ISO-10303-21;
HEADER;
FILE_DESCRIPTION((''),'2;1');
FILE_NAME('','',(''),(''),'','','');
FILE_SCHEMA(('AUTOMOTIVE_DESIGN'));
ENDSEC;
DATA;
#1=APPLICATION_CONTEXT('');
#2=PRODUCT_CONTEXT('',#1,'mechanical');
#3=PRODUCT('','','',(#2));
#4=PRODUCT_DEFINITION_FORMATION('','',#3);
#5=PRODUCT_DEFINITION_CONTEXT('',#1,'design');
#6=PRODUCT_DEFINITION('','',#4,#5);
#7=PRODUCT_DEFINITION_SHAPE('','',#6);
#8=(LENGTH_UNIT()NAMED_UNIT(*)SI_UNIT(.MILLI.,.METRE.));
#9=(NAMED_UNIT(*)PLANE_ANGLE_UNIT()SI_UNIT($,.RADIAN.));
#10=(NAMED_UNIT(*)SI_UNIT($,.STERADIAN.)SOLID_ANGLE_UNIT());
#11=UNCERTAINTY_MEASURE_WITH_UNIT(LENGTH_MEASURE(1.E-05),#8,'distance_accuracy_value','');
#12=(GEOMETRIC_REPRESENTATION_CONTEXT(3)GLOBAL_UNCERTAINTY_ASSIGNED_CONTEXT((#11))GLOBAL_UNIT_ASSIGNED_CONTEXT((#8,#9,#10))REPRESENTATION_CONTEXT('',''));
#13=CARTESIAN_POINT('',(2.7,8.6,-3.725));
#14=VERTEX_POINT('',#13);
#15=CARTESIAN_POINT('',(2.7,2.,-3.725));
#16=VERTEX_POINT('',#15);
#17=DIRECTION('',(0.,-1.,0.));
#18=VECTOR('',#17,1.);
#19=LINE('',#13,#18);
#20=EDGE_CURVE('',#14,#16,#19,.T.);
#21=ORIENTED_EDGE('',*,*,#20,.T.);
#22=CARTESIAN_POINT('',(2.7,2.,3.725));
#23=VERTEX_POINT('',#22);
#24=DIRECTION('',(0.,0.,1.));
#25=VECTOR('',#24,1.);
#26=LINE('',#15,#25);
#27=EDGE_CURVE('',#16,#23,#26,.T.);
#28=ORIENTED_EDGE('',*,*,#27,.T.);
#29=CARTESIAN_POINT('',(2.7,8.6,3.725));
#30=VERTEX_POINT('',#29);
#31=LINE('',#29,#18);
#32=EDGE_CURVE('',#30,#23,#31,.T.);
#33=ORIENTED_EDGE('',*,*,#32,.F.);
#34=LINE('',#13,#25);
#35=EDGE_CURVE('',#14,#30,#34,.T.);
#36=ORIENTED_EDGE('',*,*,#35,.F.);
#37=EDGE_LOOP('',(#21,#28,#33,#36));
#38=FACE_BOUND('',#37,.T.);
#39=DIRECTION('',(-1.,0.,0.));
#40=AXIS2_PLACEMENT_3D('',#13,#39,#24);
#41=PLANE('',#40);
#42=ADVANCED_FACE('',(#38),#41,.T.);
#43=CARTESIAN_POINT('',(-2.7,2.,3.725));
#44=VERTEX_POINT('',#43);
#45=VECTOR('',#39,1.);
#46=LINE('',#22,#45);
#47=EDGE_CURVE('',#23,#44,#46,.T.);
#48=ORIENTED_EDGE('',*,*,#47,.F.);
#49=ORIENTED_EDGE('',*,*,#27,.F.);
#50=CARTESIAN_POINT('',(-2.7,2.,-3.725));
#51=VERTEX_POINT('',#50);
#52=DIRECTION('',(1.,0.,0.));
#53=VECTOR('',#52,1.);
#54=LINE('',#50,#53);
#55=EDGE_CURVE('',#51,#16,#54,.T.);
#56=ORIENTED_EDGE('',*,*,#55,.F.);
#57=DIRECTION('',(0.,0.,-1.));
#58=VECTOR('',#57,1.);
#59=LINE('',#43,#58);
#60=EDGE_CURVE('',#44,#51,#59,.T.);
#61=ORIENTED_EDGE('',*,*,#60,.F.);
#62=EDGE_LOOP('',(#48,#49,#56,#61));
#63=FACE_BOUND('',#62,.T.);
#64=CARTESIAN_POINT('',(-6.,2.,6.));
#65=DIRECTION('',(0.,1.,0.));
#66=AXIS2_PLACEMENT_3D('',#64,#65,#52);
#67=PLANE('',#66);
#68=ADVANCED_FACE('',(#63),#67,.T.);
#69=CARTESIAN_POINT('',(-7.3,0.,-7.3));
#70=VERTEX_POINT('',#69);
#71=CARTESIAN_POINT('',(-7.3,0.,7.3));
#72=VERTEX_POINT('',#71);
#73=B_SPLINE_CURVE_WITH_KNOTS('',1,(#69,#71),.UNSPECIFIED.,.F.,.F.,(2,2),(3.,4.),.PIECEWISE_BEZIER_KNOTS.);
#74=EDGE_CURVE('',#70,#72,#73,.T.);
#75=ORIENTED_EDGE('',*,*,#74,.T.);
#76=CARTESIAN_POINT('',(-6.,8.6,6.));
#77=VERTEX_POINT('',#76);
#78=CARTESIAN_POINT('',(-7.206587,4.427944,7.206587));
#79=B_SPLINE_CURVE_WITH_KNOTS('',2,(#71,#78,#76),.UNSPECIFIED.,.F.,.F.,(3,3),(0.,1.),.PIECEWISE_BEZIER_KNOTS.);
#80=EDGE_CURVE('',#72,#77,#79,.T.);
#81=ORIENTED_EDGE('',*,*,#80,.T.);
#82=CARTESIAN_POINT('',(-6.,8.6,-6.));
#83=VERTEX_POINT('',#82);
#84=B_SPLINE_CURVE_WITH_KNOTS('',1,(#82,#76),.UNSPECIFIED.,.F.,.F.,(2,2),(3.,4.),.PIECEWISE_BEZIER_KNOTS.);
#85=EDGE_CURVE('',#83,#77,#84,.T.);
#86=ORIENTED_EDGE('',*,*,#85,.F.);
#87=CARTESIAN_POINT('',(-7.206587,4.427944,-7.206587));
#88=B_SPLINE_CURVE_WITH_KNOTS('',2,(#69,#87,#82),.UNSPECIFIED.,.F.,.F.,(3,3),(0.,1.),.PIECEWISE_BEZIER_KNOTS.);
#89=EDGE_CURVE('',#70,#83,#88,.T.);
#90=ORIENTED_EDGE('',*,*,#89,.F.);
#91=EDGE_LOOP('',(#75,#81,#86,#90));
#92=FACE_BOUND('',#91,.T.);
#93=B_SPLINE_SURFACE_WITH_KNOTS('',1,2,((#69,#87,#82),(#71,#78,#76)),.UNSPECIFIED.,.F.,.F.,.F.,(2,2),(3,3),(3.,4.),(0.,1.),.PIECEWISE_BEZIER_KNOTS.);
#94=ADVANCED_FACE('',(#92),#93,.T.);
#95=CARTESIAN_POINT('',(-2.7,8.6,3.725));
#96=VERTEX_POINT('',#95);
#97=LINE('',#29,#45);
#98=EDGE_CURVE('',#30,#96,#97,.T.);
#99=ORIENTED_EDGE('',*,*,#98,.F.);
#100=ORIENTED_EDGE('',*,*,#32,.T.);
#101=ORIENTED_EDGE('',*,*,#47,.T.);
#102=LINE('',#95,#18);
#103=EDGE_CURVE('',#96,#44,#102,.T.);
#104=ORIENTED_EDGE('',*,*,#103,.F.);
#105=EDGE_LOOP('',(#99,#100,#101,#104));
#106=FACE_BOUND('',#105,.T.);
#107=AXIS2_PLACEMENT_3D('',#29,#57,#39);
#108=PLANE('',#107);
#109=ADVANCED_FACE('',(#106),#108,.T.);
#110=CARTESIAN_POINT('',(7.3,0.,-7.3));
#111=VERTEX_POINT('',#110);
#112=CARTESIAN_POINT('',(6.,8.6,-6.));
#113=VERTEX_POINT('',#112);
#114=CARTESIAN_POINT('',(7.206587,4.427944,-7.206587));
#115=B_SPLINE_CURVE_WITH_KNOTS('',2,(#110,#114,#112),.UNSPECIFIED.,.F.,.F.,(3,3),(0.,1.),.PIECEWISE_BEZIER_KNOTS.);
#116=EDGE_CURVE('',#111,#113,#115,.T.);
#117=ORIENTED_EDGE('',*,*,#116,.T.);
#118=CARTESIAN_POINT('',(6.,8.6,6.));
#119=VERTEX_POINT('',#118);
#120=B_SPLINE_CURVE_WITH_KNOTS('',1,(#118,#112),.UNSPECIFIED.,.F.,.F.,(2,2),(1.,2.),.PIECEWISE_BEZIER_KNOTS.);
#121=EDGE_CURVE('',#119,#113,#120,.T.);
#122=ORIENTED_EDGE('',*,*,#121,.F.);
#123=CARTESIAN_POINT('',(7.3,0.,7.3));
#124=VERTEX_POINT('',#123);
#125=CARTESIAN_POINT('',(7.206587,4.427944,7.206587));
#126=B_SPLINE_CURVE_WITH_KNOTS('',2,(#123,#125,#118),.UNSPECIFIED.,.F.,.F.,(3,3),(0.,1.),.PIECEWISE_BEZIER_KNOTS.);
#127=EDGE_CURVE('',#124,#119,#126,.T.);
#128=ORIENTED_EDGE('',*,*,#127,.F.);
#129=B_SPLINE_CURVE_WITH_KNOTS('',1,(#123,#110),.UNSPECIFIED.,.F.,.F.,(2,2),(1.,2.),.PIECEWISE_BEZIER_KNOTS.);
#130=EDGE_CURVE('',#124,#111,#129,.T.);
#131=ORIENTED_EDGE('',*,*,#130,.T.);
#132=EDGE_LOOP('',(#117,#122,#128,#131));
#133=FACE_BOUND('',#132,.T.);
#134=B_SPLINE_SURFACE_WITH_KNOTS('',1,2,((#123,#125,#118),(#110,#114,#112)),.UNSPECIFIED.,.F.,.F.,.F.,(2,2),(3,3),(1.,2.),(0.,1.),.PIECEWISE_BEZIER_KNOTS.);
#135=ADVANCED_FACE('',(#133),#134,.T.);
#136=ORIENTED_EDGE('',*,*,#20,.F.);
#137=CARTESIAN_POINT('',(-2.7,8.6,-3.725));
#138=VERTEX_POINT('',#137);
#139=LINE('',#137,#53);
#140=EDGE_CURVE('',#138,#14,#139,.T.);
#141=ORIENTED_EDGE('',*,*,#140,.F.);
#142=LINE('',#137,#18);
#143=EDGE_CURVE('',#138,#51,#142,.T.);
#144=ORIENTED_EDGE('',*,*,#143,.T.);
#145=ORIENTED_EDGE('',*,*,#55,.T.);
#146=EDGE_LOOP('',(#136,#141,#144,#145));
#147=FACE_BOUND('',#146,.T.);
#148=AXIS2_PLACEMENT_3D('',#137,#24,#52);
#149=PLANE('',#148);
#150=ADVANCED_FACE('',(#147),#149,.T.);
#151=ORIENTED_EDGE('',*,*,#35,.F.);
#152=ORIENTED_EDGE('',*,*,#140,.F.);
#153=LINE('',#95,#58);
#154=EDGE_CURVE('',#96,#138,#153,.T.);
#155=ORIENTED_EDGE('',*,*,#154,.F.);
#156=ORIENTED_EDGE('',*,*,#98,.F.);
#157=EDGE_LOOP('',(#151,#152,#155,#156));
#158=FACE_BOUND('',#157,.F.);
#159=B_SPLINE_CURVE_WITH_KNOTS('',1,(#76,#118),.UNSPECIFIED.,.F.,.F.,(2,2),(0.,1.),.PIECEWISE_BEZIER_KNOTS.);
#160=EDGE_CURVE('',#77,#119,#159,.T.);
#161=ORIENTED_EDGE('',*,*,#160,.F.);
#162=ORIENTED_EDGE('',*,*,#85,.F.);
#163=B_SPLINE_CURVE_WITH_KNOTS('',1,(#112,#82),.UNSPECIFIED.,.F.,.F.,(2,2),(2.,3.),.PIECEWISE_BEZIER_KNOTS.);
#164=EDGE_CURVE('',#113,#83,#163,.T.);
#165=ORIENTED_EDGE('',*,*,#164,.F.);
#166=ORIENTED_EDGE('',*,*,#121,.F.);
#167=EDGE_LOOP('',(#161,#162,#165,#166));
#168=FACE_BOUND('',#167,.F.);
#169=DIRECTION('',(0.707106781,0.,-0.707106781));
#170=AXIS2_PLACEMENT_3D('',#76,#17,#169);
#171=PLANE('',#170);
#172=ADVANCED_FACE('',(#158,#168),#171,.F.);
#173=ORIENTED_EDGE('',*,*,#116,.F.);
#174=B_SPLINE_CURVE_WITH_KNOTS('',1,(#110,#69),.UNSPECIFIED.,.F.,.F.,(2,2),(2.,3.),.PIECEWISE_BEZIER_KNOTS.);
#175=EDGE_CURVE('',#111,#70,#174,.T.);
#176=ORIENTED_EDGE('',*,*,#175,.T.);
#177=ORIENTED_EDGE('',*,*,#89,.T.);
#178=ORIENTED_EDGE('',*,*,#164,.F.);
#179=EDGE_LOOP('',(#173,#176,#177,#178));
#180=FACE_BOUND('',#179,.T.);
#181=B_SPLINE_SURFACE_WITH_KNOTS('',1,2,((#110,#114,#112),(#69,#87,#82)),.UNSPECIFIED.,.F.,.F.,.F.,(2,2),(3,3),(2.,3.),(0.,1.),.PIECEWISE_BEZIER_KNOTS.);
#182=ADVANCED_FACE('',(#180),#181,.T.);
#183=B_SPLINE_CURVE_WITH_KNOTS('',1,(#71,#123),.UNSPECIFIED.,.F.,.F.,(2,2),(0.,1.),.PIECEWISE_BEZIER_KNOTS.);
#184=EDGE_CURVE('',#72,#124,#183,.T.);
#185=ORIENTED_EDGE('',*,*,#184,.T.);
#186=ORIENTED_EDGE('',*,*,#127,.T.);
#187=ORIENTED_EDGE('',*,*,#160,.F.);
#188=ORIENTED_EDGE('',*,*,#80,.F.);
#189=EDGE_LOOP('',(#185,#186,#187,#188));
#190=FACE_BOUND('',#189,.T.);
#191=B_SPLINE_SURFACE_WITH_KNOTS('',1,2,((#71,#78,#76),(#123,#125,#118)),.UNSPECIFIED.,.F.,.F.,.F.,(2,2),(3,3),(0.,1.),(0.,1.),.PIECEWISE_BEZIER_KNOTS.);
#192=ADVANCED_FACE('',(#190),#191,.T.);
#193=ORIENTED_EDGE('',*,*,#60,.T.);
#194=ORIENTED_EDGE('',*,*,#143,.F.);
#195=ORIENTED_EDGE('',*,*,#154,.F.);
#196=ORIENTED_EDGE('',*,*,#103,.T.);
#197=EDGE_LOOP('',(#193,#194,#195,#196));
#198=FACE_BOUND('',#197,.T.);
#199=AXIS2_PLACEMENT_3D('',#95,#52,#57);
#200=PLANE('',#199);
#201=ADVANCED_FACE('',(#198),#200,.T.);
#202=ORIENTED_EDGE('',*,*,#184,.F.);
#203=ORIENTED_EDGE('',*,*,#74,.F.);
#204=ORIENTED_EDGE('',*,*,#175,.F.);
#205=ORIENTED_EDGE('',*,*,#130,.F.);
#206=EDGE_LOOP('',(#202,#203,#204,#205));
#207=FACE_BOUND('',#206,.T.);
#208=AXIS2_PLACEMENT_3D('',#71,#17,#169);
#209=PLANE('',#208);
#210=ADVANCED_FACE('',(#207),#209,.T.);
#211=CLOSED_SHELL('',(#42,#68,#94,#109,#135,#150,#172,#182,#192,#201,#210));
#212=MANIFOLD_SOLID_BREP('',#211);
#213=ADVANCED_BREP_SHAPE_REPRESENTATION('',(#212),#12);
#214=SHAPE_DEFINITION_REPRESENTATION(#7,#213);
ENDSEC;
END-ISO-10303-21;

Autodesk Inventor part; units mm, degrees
ref_plane "YZ Plane" through (0, 0, 0) normal (1, 0, 0) x (0, 1, 0)
ref_plane "XZ Plane" through (0, 0, 0) normal (0, 1, 0) x (-1, 0, 0)
sketch "Base Loop" plane through (0, 0, 0) normal (0, 1, 0) x (-1, 0, 0)
  line L0 (-7.3, 7.3) -> (7.3, 7.3)
  line L1 (7.3, 7.3) -> (7.3, -7.3)
  line L2 (7.3, -7.3) -> (-7.3, -7.3)
  line L3 (-7.3, -7.3) -> (-7.3, 7.3)
  line L4 (-7.3, 7.3) -> (7.3, -7.3) construction
  line L5 (7.3, 7.3) -> (-7.3, -7.3) construction
  point P0 (0, 0)
  point P1 (0, 0)
  point P2 (0, 0)
  dimension "d0" = 14.6
  dimension "d1" = 14.6
ref_plane "Mid Plane" through (-7.3, 2, -7.3) normal (0, 1, 0) x (1, 0, 0)
ref_plane "Base Plane" through (-7.3, 0, -7.3) normal (0, 1, 0) x (1, 0, 0)
sketch "Mid Loop" plane through (-7.3, 2, -7.3) normal (0, 1, 0) x (1, 0, 0)
  line L0 (14.5, -14.5) -> (0.1, -14.5)
  line L1 (0.1, -14.5) -> (0.1, -0.1)
  line L2 (0.1, -0.1) -> (14.5, -0.1)
  line L3 (14.5, -0.1) -> (14.5, -14.5)
  line L4 (14.5, -14.5) -> (0.1, -0.1) construction
  line L5 (0.1, -14.5) -> (14.5, -0.1) construction
  point P0 (7.3, -7.3)
  dimension "d3" = 14.4
  dimension "d4" = 14.4
ref_plane "Top Plane" through (-7.3, 8.6, -7.3) normal (0, 1, 0) x (1, 0, 0)
sketch "Top Loop" plane through (-7.3, 8.6, -7.3) normal (0, 1, 0) x (1, 0, 0)
  line L0 (13.3, -13.3) -> (1.3, -13.3)
  line L1 (1.3, -13.3) -> (1.3, -1.3)
  line L2 (1.3, -1.3) -> (13.3, -1.3)
  line L3 (13.3, -1.3) -> (13.3, -13.3)
  line L4 (13.3, -13.3) -> (1.3, -1.3) construction
  line L5 (1.3, -13.3) -> (13.3, -1.3) construction
  point P0 (7.3, -7.3)
  dimension "d6" = 12
  dimension "d7" = 12
loft "Keyswitch Body" add profiles "Base Loop", "Mid Loop", "Top Loop"
sketch "Cut in profile" plane through (-6, 8.6, 6) normal (0, 1, 0) x (1, 0, 0)
  line L0 (8.7, 2.275) -> (3.3, 2.275)
  line L1 (3.3, 2.275) -> (3.3, 9.725)
  line L2 (3.3, 9.725) -> (8.7, 9.725)
  line L3 (8.7, 9.725) -> (8.7, 2.275)
  line L4 (8.7, 2.275) -> (3.3, 9.725) construction
  line L5 (3.3, 2.275) -> (8.7, 9.725) construction
  point P0 (6, 6)
  dimension "d17" = 7.45
  dimension "d18" = 5.4
extrude "Pole Cut in" cut sketch "Cut in profile" against normal blind 6.6
equation "\"d1\" = d0"
equation "\"d3\" = s_bwidth"
equation "\"d4\" = d3"
equation "\"d17\" = s_polebl"
equation "\"d18\" = s_polebw"
equation "\"k_width\" = 18"
equation "\"k_height\" = 16.5"
equation "\"k_taper1\" = 1.5"
equation "\"k_taper2\" = 0.5"
equation "\"k_radius\" = 6"
equation "\"k_wthick\" = 1.5"
equation "\"k_ribthick\" = 1.5"
equation "\"k_ribheight\" = 5"
equation "\"k_poleoff\" = 2.25"
equation "\"k_poledia\" = 5.3"
equation "\"k_cmxw\" = 1.1"
equation "\"k_cmxl\" = 4.15"
equation "\"s_bwidth\" = 14.4"
equation "\"s_poleh\" = 3.6"
equation "\"s_polebw\" = 5.4"
equation "\"s_polebl\" = 7.45"
equation "\"b_rshift\" = 49.5"
equation "\"b_ctrl\" = 22.5"
equation "\"b_space\" = 117"
equation "\"b_height\" = 77"
equation "\"b_width\" = 285"
equation "\"b_lshift\" = 40.5"
equation "\"b_tab\" = 27"
equation "\"b_pad\" = 1"
equation "\"b_caps\" = 31.5"
equation "\"k_staper\" = 1"
equation "\"k_ltaper\" = 1.5"
equation "\"k_lradius\" = 6"
equation "\"k_sradius\" = 4"
equation "\"k_height_t\" = 16"
equation "\"k_taper_wide\" = 1.5"
equation "\"k_taper_thin\" = 0.0001"
equation "\"k_height_low\" = 15"
equation "\"k_shortening\" = 4.5"
equation "\"k_cmxd\" = 4"
equation "\"k_taper_side\" = 0.5"
properties part number "keyswitch-base_cherrymx"
